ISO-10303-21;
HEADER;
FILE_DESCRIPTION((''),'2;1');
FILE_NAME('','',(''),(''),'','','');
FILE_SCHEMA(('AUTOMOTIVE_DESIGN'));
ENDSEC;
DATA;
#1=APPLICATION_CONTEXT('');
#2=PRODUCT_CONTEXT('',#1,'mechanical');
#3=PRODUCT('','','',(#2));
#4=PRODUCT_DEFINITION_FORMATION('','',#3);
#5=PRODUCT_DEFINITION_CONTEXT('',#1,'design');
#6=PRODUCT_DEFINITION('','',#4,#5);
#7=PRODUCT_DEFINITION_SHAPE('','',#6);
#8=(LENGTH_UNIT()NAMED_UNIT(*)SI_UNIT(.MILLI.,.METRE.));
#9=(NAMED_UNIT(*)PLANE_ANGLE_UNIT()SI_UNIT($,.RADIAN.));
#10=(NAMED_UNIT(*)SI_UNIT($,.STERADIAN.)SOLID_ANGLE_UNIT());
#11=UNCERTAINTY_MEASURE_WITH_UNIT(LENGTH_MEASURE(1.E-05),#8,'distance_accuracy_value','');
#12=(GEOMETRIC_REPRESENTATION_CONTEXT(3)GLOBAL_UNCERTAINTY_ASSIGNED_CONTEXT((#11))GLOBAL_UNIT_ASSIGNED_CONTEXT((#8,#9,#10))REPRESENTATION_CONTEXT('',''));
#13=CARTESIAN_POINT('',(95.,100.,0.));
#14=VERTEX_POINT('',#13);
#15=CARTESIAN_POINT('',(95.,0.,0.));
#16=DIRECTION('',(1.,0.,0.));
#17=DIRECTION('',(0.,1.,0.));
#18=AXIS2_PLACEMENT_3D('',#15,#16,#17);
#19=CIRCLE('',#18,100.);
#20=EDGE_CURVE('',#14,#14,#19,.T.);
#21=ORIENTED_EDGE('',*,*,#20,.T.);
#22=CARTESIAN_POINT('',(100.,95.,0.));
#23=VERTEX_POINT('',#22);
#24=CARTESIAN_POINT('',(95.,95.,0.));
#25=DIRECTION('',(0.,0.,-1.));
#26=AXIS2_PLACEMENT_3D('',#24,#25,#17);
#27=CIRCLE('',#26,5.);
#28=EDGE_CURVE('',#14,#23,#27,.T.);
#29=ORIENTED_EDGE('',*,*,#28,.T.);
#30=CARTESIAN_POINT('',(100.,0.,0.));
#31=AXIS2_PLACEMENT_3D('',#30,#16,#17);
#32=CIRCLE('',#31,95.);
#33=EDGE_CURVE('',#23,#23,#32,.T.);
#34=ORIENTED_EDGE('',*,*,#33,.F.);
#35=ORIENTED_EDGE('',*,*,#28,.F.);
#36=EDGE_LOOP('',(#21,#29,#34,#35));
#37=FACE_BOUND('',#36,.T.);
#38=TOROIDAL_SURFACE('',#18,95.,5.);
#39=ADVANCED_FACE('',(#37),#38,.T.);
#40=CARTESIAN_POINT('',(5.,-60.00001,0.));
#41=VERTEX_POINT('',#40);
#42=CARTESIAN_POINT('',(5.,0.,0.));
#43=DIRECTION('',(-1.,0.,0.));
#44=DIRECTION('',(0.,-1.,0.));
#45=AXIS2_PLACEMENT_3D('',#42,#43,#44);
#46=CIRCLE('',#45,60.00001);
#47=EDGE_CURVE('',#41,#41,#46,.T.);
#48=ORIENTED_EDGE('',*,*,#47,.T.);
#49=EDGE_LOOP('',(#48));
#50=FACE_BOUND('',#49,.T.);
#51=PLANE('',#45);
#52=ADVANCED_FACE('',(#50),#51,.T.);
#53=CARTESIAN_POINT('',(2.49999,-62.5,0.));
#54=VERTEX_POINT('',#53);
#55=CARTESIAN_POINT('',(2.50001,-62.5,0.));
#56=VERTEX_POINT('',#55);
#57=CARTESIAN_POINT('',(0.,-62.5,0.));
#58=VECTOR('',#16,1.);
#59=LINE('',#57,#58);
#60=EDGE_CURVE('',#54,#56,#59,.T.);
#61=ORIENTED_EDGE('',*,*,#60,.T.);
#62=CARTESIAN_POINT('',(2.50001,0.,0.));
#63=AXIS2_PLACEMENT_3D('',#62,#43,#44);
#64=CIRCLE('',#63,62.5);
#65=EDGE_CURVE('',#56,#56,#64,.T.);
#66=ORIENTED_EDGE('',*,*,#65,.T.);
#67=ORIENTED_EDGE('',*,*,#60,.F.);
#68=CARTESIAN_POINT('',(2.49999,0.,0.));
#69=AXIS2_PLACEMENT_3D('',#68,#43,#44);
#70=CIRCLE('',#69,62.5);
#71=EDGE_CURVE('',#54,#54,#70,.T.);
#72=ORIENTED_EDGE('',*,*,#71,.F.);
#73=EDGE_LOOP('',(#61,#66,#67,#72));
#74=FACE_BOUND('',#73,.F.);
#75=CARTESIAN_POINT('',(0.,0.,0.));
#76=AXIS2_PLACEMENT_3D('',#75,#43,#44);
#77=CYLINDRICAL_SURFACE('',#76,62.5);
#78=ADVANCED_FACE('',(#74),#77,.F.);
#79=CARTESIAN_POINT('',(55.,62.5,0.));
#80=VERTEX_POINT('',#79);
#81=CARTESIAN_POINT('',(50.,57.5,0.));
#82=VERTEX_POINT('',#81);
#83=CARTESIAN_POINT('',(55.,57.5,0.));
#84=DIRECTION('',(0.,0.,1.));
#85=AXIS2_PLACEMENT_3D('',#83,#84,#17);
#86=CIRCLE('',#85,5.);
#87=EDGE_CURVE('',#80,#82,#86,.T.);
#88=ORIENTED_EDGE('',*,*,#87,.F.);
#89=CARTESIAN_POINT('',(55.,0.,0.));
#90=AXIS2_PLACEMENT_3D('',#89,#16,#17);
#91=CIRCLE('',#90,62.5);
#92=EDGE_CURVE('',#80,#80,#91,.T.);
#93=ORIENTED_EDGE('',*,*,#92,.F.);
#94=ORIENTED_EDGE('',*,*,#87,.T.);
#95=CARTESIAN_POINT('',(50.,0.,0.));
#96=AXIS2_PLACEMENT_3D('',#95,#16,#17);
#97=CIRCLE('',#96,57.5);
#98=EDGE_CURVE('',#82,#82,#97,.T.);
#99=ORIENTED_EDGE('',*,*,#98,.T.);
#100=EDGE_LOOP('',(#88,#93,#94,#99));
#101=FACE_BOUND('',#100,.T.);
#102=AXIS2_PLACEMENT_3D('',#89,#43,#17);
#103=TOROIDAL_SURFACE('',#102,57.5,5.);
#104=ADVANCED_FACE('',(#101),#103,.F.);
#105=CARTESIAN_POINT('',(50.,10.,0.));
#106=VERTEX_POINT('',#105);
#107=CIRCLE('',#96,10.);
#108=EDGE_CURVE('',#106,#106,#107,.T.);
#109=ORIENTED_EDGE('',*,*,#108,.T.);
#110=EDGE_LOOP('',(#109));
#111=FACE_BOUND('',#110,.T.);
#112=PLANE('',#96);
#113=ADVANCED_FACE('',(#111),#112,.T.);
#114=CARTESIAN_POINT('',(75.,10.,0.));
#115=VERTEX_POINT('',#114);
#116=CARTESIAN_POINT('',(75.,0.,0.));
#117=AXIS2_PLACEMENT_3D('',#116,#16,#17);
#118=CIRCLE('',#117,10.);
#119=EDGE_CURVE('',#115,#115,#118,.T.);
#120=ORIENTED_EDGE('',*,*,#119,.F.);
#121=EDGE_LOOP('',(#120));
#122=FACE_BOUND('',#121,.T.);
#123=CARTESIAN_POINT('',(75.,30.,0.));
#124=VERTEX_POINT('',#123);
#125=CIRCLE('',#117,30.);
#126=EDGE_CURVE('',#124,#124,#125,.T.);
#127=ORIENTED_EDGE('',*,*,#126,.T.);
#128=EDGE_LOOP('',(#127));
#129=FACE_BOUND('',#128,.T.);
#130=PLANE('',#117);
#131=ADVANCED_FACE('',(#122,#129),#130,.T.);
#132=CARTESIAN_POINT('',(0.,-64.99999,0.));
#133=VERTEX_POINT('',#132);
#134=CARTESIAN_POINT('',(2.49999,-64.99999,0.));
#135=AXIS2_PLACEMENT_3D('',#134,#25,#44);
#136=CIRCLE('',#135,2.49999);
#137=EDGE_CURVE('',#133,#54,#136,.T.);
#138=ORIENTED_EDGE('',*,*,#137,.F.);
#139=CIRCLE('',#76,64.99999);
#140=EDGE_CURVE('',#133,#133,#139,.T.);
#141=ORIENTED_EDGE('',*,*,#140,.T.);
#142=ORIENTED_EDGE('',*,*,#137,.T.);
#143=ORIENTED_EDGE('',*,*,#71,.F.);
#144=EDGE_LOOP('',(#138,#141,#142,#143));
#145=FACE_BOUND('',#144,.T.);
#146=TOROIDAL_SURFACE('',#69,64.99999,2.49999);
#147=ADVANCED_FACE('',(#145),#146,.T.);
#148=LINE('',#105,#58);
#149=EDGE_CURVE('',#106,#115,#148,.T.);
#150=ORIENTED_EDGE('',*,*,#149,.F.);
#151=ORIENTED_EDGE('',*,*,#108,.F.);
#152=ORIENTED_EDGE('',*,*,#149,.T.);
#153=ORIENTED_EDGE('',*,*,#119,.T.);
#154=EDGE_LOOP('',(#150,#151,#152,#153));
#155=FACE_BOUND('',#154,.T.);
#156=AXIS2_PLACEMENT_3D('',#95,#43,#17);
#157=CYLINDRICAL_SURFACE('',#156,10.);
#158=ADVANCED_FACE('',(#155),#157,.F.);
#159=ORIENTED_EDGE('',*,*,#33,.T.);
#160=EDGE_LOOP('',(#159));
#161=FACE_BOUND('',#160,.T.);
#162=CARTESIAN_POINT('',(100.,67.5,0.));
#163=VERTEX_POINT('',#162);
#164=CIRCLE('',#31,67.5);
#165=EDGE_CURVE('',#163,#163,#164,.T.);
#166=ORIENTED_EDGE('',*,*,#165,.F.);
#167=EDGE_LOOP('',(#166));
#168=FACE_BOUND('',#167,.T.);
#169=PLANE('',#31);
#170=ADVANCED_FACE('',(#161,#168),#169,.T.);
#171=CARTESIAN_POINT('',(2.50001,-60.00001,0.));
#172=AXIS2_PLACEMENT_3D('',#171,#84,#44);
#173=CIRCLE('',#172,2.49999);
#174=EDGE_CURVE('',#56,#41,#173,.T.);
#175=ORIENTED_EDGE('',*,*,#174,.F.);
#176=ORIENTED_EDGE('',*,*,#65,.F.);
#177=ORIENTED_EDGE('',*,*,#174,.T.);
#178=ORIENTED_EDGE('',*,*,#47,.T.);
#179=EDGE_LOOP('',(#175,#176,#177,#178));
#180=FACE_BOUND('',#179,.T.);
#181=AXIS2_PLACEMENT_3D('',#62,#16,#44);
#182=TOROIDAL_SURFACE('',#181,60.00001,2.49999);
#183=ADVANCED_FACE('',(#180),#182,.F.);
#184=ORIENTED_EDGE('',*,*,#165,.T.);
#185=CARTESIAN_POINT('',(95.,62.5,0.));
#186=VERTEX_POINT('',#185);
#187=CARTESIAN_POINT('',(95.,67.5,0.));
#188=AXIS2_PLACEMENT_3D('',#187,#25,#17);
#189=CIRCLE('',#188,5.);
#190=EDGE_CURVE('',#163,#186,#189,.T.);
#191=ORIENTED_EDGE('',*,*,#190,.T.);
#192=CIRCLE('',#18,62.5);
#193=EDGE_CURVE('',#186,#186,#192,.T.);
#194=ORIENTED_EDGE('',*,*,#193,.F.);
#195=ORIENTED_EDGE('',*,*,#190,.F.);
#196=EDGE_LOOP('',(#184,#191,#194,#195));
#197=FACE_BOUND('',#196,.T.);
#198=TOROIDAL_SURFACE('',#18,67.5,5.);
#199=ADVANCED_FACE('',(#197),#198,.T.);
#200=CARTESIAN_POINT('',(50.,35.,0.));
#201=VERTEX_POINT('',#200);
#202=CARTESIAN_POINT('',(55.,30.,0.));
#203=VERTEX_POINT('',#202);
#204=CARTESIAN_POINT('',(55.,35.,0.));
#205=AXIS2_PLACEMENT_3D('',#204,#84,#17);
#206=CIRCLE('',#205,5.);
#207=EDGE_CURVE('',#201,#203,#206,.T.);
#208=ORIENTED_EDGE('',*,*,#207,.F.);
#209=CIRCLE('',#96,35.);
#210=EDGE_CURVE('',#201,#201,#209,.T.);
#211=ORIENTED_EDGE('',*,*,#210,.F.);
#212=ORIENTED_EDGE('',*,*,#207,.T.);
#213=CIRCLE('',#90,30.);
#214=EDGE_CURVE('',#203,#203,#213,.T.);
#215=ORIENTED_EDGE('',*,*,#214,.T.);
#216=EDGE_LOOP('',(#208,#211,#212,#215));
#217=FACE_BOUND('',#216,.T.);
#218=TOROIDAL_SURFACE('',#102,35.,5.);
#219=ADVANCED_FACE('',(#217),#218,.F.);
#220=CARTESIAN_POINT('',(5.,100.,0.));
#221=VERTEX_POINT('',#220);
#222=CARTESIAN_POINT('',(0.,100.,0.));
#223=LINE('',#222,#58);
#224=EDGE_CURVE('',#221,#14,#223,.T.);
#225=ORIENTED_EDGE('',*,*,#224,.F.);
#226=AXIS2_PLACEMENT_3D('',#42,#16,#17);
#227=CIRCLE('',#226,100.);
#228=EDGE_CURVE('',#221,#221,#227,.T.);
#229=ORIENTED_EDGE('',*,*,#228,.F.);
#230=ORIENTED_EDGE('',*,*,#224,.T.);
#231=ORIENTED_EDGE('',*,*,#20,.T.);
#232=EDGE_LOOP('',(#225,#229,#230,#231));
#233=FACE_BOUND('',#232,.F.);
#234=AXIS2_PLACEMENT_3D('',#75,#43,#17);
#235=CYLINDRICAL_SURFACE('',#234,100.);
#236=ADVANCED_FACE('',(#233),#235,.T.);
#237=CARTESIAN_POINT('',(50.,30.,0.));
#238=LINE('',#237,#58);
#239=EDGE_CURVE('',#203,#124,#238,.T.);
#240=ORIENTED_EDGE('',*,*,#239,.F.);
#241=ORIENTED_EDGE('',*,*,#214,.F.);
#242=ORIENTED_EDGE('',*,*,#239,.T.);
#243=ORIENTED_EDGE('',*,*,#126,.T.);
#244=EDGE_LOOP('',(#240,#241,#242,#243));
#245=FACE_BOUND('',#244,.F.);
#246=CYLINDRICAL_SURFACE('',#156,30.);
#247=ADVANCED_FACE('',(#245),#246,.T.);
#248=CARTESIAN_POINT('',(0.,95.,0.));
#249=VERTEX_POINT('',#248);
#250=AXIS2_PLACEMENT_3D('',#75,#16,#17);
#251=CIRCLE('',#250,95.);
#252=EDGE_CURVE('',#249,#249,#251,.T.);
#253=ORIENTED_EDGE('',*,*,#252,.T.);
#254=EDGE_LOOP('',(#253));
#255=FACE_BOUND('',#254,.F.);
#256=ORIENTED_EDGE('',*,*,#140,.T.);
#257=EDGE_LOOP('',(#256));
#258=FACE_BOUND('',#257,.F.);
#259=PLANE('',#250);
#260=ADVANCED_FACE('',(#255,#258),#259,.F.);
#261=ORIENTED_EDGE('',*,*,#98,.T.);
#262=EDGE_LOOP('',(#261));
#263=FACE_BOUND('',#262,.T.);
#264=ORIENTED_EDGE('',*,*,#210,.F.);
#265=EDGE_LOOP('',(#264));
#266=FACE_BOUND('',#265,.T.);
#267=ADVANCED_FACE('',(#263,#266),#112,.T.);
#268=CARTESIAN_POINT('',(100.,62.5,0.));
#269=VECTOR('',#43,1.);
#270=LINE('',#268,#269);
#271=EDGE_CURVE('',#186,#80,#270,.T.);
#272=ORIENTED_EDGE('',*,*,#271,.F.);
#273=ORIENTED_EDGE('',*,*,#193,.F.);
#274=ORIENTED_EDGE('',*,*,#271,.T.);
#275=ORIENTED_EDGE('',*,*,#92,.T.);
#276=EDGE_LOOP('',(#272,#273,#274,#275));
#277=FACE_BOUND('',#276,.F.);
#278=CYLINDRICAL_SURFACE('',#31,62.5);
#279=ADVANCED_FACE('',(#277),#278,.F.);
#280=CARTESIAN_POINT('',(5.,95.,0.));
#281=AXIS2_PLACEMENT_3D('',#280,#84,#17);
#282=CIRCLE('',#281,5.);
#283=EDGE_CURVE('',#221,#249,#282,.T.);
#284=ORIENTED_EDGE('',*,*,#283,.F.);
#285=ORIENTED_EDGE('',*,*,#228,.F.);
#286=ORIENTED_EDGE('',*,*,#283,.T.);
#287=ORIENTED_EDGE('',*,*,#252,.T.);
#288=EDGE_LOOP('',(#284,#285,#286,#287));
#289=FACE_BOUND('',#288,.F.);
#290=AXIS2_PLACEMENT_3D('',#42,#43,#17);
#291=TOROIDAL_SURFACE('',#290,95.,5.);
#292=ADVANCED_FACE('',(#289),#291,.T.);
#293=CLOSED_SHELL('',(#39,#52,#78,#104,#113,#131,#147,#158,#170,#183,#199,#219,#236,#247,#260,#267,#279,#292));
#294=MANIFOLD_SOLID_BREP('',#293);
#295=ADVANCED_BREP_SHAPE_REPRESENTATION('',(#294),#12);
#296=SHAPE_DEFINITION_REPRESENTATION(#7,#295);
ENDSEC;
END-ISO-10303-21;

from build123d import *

# Parameters (mm, degrees)
F0_R     = 100
F1_DEPTH = 100
F2_R     = 5
F3_R     = 62.5
F4_DEPTH = 50
F5_R     = 30
F5_R_2   = 10
F6_DEPTH = 25
F7_R     = 5
F8_R     = 62.5
F9_DEPTH = 5
F10_R    = 2.49999


# Not quite as in the source:
# - a fillet or chamfer is up to 0.001 mm smaller than in the source, because OpenCascade refuses the exact size


with BuildPart() as f1:
    # F0 (on Right) → F1 (new body)
    with BuildSketch(Plane.YZ):
        Circle(F0_R)
    extrude(amount=F1_DEPTH)

    # F2
    f2_edges = [f1.edges().sort_by_distance(p)[0] for p in [
        (100, -100, 0),
        (0, -100, 0),
    ]]
    fillet(f2_edges, radius=F2_R)

    # F3 (on face) → F4 (cut)
    with BuildSketch(Plane.YZ.offset(100)):
        Circle(F3_R)
    extrude(amount=-F4_DEPTH, mode=Mode.SUBTRACT)

    # F5 (on face) → F6 (join)
    with BuildSketch(Plane.YZ.offset(50)):
        Circle(F5_R)
        Circle(F5_R_2, mode=Mode.SUBTRACT)
    extrude(amount=F6_DEPTH)

    # F7
    f7_edges = [f1.edges().sort_by_distance(p)[0] for p in [
        (50, -62.5, 0),
        (100, -62.5, 0),
        (50, -30, 0),
    ]]
    fillet(f7_edges, radius=F7_R)

    # F8 (on face) → F9 (cut)
    with BuildSketch(Plane(origin=(0, 0, 0), x_dir=(0, -1, 0), z_dir=(-1, 0, 0))):
        Circle(F8_R)
    extrude(amount=-F9_DEPTH, mode=Mode.SUBTRACT)

    # F10 (radius 2.5 in the source; OpenCascade refuses exactly that, so slightly less here)
    f10_edges = [f1.edges().sort_by_distance(p)[0] for p in [
        (0, 62.5, 0),
        (5, 62.5, 0),
    ]]
    fillet(f10_edges, radius=F10_R)


solid = f1.part
